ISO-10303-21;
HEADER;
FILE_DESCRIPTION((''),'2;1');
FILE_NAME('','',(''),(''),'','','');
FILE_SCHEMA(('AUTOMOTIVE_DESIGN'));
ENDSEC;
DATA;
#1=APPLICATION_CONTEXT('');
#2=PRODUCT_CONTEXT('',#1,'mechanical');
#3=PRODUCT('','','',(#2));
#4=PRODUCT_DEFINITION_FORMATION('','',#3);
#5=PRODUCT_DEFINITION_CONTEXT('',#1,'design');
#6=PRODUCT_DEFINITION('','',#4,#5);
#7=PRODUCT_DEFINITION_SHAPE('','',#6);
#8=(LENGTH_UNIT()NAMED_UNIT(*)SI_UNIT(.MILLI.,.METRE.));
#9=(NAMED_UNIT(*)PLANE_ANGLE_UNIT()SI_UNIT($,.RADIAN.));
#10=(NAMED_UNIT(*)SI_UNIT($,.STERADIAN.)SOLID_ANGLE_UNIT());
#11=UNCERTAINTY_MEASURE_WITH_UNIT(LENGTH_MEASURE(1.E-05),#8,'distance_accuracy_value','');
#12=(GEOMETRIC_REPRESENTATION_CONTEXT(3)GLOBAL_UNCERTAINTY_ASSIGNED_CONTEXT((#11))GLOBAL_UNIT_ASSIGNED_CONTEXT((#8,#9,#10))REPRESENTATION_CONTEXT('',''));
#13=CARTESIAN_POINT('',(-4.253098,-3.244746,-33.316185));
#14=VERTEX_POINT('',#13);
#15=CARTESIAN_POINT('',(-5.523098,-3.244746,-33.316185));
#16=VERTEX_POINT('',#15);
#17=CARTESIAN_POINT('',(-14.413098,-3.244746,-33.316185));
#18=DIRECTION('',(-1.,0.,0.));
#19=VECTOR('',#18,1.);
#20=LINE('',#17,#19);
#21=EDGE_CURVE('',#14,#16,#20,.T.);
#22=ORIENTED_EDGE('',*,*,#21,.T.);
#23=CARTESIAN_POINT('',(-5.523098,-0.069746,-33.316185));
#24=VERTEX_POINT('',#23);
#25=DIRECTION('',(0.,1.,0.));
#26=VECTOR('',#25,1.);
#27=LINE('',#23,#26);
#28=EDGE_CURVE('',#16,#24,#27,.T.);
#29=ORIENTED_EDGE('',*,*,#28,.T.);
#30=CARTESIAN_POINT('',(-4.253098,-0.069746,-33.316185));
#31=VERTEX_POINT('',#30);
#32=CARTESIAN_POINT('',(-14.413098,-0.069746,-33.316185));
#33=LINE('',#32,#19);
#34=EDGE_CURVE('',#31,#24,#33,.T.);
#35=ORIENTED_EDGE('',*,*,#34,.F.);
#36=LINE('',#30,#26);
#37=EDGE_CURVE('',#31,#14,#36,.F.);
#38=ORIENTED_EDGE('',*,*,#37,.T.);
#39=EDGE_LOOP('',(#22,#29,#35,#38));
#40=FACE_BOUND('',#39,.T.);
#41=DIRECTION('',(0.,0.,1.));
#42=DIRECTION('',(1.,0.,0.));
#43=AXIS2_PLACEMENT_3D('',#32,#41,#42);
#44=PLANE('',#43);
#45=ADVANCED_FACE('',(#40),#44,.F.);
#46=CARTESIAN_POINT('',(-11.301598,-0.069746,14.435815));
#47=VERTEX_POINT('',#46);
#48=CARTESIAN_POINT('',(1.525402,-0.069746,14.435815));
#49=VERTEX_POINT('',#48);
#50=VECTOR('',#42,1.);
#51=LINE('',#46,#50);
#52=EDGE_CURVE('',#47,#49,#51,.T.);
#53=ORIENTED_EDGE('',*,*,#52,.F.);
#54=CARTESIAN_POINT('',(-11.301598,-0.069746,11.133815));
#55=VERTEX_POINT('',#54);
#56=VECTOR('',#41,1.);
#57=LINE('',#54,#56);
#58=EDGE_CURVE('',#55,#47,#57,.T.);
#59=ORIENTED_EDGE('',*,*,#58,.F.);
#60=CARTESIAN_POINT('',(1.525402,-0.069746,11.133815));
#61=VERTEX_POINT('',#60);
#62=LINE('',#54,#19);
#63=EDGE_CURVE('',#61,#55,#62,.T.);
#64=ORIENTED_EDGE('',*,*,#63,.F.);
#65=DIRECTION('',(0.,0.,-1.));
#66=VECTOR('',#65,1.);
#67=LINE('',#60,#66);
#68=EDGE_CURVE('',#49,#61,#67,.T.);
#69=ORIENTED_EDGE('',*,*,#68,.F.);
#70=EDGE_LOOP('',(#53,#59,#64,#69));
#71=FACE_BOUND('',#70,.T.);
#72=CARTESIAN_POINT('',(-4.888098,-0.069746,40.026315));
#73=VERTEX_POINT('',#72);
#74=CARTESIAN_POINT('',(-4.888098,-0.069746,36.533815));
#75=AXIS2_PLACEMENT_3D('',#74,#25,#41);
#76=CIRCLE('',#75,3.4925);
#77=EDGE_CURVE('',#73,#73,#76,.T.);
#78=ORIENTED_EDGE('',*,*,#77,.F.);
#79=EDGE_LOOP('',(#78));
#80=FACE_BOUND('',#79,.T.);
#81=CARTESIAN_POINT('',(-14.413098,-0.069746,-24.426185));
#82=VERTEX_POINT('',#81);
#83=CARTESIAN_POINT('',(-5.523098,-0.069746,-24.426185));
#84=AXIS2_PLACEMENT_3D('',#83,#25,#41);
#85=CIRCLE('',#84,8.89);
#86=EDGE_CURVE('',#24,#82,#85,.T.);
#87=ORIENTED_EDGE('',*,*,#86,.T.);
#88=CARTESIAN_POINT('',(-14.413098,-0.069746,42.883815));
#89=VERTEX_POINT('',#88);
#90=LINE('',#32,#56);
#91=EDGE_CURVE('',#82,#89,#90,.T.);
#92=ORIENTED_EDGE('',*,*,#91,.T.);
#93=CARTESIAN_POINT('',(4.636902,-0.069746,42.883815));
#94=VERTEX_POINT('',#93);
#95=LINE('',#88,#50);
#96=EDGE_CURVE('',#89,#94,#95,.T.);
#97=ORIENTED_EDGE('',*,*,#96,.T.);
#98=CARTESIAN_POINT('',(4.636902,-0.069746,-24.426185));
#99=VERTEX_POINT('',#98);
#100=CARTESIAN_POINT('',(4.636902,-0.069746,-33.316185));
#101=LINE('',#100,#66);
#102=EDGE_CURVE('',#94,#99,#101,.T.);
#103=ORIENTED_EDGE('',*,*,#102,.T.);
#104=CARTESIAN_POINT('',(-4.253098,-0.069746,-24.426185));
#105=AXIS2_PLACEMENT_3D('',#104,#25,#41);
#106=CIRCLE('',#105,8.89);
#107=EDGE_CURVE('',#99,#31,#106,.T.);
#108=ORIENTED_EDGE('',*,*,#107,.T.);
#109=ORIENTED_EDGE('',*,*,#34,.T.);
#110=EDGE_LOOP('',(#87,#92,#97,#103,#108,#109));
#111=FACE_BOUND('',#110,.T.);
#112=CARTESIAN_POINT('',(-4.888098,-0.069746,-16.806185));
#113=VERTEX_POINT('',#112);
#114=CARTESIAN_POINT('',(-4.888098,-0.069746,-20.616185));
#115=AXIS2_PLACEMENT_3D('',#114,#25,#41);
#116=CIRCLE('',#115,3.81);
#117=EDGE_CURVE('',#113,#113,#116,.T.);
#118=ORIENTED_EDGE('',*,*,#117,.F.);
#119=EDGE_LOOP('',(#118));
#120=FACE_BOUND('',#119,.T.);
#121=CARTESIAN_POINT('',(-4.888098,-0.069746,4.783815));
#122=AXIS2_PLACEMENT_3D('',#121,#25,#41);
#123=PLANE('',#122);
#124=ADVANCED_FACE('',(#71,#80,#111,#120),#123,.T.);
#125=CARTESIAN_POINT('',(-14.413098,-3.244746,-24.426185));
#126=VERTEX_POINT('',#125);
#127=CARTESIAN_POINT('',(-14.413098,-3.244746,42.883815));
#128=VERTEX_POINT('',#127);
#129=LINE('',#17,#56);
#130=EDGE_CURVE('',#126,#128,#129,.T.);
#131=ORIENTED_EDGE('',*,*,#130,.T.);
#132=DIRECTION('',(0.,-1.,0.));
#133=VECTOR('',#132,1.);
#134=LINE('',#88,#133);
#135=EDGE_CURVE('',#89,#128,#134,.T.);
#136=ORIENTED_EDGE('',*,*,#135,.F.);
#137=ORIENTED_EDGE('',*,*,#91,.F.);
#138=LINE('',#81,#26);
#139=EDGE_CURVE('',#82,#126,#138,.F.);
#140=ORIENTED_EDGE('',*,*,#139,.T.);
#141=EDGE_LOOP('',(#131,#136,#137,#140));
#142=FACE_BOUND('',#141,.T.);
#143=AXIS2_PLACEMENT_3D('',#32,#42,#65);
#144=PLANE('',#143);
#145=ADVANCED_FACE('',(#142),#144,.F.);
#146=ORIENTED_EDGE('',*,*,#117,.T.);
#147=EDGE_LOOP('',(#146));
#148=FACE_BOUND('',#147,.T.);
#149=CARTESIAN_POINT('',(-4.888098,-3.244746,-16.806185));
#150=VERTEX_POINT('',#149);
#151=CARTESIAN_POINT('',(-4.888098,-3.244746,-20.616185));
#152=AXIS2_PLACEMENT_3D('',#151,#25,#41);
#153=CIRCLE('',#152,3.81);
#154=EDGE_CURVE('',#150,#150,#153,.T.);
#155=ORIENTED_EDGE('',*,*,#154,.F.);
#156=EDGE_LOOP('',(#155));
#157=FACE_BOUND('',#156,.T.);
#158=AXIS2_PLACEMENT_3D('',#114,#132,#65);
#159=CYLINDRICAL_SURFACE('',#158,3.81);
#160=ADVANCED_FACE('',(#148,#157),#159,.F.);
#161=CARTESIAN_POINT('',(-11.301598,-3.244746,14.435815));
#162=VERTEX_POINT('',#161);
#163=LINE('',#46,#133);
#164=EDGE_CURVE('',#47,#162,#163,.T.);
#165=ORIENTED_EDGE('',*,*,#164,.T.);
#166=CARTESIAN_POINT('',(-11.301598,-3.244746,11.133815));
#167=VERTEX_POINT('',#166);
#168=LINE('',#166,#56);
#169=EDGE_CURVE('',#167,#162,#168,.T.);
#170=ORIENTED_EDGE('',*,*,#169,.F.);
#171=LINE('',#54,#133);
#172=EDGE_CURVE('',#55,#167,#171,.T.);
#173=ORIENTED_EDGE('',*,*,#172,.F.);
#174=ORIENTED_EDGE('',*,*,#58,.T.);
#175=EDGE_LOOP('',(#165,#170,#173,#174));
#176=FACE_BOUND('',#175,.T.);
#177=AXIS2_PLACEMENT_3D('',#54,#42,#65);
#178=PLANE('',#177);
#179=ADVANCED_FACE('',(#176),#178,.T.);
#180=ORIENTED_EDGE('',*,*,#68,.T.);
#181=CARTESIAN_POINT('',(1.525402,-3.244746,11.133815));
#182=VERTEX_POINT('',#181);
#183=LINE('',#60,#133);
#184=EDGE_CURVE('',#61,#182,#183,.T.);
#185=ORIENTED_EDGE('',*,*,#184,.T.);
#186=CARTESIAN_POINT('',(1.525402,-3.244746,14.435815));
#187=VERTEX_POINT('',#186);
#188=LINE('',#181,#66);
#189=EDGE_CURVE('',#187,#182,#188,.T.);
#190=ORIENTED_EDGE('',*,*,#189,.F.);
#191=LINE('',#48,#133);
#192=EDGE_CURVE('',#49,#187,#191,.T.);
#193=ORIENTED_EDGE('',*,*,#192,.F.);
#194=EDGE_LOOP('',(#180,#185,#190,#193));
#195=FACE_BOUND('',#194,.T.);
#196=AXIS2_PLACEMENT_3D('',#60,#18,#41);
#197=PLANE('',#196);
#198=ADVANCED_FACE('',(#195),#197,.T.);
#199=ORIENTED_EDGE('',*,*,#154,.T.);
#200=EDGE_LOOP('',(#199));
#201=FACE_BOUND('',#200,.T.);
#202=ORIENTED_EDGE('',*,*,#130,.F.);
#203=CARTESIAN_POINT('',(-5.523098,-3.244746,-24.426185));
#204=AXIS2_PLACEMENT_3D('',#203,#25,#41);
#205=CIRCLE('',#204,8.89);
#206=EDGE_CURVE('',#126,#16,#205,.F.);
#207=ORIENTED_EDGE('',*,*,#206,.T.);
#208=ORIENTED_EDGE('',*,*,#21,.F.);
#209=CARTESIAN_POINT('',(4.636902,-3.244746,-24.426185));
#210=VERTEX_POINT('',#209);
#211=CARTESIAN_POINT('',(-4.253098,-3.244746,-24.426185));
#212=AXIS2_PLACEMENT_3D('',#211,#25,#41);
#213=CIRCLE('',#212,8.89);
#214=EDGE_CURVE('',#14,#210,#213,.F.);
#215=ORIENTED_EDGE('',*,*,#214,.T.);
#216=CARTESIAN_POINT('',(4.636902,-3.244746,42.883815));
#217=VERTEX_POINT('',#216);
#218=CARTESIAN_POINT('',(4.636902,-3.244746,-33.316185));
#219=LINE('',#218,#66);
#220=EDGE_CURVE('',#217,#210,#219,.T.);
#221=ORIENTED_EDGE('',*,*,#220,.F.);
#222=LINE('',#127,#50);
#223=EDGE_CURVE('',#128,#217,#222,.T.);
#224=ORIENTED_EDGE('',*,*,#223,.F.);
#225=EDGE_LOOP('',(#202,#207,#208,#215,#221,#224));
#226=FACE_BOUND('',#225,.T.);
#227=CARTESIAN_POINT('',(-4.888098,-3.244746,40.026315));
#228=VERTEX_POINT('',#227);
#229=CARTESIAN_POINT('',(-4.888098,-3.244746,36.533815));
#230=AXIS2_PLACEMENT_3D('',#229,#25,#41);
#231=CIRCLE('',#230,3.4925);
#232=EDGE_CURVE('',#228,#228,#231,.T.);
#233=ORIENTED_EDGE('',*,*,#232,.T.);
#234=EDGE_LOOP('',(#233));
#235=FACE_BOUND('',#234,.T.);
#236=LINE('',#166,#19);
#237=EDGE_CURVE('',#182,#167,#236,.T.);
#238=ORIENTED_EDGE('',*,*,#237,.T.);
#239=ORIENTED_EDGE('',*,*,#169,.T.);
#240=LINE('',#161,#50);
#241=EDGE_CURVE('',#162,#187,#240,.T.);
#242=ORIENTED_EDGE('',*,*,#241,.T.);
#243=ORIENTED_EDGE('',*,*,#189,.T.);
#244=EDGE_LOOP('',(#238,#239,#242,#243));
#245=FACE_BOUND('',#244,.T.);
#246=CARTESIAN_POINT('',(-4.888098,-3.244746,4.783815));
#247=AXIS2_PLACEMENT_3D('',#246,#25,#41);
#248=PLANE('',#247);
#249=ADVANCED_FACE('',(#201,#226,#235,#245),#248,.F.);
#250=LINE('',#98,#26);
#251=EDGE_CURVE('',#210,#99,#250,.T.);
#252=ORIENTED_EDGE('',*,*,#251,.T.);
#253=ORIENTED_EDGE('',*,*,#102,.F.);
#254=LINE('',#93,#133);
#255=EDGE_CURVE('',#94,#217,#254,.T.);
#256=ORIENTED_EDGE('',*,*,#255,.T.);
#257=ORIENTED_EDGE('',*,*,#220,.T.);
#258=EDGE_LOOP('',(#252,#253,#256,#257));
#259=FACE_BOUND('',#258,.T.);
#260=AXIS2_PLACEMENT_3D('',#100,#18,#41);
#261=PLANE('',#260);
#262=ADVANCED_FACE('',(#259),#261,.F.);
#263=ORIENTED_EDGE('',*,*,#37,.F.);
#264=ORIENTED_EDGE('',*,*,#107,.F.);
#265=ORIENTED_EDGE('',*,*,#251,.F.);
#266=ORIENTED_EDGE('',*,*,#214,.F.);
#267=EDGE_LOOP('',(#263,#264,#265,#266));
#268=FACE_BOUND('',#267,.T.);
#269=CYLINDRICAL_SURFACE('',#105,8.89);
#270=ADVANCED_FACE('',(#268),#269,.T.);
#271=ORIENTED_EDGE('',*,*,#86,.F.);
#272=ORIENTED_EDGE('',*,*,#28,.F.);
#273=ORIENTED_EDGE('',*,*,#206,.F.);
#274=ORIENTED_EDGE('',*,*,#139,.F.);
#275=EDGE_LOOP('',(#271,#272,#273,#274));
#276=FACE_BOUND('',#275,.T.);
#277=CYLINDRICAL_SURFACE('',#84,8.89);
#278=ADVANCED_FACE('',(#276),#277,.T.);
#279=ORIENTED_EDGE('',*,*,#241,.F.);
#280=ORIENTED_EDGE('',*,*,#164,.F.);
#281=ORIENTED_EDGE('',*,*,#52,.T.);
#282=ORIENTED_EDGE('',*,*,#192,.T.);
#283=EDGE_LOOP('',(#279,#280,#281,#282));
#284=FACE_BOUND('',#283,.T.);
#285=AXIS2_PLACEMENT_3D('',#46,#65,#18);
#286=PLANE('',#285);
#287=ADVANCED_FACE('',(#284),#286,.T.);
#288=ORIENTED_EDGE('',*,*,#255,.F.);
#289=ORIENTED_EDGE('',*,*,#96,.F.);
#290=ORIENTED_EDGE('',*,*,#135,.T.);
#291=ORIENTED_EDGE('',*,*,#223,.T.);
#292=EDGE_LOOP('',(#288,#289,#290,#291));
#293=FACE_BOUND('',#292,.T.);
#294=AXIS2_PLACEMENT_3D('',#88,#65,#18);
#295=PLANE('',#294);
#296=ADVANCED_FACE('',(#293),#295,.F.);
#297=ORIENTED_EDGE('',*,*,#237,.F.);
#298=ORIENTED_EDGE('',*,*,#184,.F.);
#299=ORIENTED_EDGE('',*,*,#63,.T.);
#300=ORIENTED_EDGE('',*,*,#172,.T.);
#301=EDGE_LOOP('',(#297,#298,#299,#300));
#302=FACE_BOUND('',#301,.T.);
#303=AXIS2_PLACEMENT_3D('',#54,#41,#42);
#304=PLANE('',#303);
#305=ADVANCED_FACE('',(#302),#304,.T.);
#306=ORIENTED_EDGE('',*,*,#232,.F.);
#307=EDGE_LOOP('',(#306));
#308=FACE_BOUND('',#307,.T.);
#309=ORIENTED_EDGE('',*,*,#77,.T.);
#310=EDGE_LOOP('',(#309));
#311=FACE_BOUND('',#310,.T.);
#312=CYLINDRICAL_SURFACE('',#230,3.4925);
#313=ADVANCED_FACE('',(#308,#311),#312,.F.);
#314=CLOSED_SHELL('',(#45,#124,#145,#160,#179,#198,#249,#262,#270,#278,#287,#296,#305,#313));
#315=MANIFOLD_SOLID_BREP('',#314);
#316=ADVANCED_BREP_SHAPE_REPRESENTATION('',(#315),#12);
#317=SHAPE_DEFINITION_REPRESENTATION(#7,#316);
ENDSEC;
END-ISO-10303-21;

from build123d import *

# Parameters (mm, degrees)
STEM_START                = -3.244746183
STEM_OTHER_SIDE_OUTLINE_W = 12.827
STEM_OTHER_SIDE_OUTLINE_H = 3.302
STEM_OTHER_SIDE_OUTLINE_R = 3.81
STEM_OTHER_SIDE_DEPTH     = 3.175
SKETCH1_R                 = 3.4925
CUT_EXTRUDE1_DEPTH        = 3.175


# Read off the part's stored shape, not the designer's step: Stem Other Side
with BuildPart() as part:
    # Stem Other Side outline → Stem Other Side (new body)
    with BuildSketch(Plane(origin=(0, 0, 0), x_dir=(1, 0, 0), z_dir=(0, 1, 0)).offset(STEM_START)):
        with BuildLine():
            Line((-4.25309824, 33.316184511), (-5.52309824, 33.316184511))
            ThreePointArc((-5.52309824, 33.316184511), (-11.809277525, 30.712363796), (-14.41309824, 24.426184511))
            Line((-14.41309824, 24.426184511), (-14.41309824, -42.883815489))
            Line((-14.41309824, -42.883815489), (4.63690176, -42.883815489))
            Line((4.63690176, -42.883815489), (4.63690176, 24.426184511))
            ThreePointArc((4.63690176, 24.426184511), (2.033081045, 30.712363796), (-4.25309824, 33.316184511))
        make_face()
        with Locations((-4.88809824, -12.784815489)):
            Rectangle(STEM_OTHER_SIDE_OUTLINE_W, STEM_OTHER_SIDE_OUTLINE_H, mode=Mode.SUBTRACT)
        with Locations((-4.88809824, 20.616184511)):
            Circle(STEM_OTHER_SIDE_OUTLINE_R, mode=Mode.SUBTRACT)
    extrude(amount=STEM_OTHER_SIDE_DEPTH)

    # Sketch1 → Cut-Extrude1 (cut)
    with BuildSketch(Plane(origin=(0, -0.069746183, 0), x_dir=(1, 0, 0), z_dir=(0, 1, 0))):
        with Locations(Location((-4.88809824, -36.533815489, 0), (0, 0, 270))):
            Circle(SKETCH1_R)
    extrude(amount=-CUT_EXTRUDE1_DEPTH, mode=Mode.SUBTRACT)


solid = part.part
